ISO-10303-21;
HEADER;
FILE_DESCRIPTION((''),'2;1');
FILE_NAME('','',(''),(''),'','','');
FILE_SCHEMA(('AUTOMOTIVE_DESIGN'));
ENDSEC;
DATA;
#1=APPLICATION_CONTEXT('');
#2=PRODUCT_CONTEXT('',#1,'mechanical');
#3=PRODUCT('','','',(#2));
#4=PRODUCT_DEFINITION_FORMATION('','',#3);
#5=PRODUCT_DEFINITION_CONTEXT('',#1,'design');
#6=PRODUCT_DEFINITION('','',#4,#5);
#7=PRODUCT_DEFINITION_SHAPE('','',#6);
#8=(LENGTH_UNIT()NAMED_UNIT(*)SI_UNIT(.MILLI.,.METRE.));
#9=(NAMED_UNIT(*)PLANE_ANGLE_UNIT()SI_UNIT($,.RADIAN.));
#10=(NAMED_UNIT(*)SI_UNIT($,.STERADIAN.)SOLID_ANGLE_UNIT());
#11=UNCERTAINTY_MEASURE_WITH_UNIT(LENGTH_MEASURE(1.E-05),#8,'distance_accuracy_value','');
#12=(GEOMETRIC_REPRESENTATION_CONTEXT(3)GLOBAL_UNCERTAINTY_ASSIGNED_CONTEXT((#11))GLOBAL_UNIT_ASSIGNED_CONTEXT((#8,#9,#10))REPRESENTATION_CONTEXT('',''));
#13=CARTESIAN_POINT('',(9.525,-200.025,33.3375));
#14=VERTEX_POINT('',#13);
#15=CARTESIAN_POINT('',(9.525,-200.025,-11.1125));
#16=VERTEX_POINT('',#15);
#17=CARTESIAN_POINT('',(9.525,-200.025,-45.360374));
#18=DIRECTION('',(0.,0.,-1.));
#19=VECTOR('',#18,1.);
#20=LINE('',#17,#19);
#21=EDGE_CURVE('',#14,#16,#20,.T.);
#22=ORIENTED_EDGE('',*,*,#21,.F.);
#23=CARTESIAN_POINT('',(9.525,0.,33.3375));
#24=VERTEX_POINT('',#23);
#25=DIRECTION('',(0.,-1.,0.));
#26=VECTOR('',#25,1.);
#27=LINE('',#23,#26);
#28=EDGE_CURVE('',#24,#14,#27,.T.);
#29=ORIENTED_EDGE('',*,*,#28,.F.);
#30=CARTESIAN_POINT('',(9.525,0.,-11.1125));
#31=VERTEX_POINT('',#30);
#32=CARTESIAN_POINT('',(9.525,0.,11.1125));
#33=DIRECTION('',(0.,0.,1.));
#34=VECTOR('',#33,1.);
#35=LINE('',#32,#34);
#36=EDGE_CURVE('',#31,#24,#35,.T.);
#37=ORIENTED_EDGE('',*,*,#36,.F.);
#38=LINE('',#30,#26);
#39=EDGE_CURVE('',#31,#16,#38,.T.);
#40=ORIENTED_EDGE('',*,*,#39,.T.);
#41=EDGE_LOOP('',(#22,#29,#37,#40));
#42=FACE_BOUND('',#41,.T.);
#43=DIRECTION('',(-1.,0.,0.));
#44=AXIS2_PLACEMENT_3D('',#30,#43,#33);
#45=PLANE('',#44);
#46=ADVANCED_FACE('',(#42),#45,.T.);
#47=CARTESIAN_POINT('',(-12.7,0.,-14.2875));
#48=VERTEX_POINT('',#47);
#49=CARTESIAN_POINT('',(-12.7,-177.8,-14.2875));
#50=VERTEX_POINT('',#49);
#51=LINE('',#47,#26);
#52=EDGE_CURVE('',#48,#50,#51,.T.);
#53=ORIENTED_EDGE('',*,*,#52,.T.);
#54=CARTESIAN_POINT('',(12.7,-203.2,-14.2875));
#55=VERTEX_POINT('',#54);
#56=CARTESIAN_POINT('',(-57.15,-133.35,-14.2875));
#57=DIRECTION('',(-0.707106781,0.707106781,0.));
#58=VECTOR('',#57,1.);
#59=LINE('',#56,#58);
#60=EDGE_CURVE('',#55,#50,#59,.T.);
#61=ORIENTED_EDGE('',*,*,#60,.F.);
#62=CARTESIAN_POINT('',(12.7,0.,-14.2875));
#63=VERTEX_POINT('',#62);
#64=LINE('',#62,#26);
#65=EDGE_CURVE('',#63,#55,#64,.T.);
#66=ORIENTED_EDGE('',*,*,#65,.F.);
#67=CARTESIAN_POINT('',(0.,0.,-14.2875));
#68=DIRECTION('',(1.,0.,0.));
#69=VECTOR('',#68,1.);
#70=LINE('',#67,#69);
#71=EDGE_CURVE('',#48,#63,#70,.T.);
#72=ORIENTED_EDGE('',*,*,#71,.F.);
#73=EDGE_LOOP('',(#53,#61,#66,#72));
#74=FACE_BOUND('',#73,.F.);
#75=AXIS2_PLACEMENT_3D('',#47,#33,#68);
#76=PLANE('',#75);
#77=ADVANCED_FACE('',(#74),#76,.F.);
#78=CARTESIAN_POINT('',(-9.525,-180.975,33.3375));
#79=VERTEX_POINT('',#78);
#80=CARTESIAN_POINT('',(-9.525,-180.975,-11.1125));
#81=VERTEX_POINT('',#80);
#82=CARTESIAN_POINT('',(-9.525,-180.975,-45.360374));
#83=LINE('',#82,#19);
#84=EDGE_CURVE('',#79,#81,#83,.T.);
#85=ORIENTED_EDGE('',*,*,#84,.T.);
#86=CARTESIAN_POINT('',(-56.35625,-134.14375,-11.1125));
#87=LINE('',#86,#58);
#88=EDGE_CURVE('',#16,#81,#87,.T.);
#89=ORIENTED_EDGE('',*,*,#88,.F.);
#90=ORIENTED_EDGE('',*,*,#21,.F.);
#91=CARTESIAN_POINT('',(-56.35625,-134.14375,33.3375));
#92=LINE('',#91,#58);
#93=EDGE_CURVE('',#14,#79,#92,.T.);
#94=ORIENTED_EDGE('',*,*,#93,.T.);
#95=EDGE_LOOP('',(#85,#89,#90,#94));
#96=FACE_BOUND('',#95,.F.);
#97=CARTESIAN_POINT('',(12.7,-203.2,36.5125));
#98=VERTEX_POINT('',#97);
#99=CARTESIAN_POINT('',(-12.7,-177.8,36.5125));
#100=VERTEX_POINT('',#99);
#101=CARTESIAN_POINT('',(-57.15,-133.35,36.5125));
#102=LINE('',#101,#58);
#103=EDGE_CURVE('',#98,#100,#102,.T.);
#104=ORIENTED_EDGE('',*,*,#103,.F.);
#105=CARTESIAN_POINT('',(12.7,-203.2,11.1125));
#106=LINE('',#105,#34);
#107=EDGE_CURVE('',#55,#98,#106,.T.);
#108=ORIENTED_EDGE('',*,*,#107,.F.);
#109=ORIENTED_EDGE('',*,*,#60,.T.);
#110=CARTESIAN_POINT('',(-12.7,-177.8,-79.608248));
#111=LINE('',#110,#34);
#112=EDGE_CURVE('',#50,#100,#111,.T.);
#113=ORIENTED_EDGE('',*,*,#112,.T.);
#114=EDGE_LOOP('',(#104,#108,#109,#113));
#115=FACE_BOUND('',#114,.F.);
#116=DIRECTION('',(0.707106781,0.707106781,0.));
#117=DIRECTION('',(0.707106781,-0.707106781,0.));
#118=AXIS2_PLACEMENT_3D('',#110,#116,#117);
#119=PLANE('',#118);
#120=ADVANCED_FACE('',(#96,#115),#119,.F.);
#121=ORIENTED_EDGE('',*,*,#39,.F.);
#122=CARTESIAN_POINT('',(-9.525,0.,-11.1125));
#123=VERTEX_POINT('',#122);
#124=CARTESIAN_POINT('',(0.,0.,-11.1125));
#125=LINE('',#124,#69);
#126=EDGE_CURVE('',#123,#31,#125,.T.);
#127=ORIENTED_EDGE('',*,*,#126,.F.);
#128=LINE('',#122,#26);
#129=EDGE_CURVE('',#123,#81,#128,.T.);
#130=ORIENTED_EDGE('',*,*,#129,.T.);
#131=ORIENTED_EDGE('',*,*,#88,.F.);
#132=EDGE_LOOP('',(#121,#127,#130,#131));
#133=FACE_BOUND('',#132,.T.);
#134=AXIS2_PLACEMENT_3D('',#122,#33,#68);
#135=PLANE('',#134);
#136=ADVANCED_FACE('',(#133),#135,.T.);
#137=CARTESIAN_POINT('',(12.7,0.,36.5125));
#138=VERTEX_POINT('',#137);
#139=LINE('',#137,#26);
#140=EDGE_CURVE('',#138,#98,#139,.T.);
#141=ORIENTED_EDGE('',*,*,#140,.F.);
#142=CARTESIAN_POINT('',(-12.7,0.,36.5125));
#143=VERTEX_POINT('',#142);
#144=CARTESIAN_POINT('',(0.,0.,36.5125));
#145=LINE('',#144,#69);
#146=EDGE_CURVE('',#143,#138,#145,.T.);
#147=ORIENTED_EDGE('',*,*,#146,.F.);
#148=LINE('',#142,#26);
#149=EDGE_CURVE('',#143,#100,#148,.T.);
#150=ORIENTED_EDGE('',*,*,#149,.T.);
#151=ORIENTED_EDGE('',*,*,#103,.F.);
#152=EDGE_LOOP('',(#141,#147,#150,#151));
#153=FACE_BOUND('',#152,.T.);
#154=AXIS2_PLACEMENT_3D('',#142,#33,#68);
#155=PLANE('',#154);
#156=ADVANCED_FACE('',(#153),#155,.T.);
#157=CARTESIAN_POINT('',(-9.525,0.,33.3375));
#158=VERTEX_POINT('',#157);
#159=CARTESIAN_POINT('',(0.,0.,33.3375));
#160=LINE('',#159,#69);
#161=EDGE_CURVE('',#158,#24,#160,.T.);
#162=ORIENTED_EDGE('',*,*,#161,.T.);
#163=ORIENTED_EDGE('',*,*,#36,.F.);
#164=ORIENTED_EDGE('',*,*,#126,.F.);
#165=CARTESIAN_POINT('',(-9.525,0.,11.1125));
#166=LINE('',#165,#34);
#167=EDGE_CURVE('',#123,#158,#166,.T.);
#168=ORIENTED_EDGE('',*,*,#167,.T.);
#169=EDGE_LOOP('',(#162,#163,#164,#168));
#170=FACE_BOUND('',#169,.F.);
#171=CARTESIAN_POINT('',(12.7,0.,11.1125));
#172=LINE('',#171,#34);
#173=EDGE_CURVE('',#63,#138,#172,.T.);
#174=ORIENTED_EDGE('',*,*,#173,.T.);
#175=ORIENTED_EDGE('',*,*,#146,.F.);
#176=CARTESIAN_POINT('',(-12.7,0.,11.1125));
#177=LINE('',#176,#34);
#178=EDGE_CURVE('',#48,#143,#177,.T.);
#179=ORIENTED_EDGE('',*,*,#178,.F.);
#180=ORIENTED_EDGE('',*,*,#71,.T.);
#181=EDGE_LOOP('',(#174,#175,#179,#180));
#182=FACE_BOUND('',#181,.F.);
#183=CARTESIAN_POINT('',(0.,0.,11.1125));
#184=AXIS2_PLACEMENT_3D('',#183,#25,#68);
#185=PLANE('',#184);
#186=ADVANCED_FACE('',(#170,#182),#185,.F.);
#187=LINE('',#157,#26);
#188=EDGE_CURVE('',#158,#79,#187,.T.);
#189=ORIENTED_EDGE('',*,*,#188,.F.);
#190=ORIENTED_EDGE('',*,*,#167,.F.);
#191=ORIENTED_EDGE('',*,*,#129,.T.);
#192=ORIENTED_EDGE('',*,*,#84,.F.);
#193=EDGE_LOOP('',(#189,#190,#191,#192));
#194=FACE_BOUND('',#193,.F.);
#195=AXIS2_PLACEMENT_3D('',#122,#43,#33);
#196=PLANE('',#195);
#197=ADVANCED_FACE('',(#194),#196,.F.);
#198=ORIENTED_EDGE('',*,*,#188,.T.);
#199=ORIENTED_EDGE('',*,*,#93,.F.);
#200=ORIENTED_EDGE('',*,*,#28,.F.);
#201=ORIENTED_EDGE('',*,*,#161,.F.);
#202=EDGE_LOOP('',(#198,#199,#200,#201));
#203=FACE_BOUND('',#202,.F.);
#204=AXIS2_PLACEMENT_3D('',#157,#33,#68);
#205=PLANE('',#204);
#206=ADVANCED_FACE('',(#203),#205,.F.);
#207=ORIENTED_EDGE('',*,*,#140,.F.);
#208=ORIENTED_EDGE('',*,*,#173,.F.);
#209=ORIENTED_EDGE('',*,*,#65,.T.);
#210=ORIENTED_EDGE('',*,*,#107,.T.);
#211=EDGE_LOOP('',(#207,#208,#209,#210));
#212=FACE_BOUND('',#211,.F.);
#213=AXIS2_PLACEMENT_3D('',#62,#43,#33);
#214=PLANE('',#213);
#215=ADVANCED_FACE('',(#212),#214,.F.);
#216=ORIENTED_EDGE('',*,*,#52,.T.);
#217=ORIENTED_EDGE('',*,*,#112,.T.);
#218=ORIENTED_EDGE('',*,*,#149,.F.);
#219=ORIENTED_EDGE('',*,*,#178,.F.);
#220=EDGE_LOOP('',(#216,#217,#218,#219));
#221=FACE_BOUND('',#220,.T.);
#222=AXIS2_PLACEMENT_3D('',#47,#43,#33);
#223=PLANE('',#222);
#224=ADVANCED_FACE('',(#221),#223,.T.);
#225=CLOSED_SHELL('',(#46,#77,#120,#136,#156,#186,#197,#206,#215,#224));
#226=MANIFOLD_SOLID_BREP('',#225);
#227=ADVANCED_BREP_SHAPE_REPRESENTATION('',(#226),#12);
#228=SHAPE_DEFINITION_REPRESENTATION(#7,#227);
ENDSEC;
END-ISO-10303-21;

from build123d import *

# Parameters (mm, degrees)
F0_W        = 25.4
F0_H        = 50.8
F0_W_2      = 19.05
F0_H_2      = 44.45
F1_DEPTH    = 203.2
F2_T1_DEPTH = 181.4414957887


# Not quite as in the source:
# - a fillet or chamfer that OpenCascade refuses, or shapes differently, is made with other operations: its cross-section is extruded or revolved along the edge and cut away or added


with BuildPart() as f1:
    # F0 (on Front) → F1 (new body)
    with BuildSketch(Plane.XZ):
        with Locations((0, 11.1125)):
            Rectangle(F0_W, F0_H)
        with Locations((0, 11.1125)):
            Rectangle(F0_W_2, F0_H_2, mode=Mode.SUBTRACT)
    extrude(amount=F1_DEPTH)

    # F2: chamfer of 25.4 on 1 edges, made by hand

    # F2_s2 → F2_t1 (cut)
    with BuildSketch(Plane.XY.offset(-79.6082478943)):
        Polygon((-12.7, -177.8), (12.7, -203.2), (-12.7, -203.2), align=None)
    extrude(amount=F2_T1_DEPTH, mode=Mode.SUBTRACT)


solid = f1.part
